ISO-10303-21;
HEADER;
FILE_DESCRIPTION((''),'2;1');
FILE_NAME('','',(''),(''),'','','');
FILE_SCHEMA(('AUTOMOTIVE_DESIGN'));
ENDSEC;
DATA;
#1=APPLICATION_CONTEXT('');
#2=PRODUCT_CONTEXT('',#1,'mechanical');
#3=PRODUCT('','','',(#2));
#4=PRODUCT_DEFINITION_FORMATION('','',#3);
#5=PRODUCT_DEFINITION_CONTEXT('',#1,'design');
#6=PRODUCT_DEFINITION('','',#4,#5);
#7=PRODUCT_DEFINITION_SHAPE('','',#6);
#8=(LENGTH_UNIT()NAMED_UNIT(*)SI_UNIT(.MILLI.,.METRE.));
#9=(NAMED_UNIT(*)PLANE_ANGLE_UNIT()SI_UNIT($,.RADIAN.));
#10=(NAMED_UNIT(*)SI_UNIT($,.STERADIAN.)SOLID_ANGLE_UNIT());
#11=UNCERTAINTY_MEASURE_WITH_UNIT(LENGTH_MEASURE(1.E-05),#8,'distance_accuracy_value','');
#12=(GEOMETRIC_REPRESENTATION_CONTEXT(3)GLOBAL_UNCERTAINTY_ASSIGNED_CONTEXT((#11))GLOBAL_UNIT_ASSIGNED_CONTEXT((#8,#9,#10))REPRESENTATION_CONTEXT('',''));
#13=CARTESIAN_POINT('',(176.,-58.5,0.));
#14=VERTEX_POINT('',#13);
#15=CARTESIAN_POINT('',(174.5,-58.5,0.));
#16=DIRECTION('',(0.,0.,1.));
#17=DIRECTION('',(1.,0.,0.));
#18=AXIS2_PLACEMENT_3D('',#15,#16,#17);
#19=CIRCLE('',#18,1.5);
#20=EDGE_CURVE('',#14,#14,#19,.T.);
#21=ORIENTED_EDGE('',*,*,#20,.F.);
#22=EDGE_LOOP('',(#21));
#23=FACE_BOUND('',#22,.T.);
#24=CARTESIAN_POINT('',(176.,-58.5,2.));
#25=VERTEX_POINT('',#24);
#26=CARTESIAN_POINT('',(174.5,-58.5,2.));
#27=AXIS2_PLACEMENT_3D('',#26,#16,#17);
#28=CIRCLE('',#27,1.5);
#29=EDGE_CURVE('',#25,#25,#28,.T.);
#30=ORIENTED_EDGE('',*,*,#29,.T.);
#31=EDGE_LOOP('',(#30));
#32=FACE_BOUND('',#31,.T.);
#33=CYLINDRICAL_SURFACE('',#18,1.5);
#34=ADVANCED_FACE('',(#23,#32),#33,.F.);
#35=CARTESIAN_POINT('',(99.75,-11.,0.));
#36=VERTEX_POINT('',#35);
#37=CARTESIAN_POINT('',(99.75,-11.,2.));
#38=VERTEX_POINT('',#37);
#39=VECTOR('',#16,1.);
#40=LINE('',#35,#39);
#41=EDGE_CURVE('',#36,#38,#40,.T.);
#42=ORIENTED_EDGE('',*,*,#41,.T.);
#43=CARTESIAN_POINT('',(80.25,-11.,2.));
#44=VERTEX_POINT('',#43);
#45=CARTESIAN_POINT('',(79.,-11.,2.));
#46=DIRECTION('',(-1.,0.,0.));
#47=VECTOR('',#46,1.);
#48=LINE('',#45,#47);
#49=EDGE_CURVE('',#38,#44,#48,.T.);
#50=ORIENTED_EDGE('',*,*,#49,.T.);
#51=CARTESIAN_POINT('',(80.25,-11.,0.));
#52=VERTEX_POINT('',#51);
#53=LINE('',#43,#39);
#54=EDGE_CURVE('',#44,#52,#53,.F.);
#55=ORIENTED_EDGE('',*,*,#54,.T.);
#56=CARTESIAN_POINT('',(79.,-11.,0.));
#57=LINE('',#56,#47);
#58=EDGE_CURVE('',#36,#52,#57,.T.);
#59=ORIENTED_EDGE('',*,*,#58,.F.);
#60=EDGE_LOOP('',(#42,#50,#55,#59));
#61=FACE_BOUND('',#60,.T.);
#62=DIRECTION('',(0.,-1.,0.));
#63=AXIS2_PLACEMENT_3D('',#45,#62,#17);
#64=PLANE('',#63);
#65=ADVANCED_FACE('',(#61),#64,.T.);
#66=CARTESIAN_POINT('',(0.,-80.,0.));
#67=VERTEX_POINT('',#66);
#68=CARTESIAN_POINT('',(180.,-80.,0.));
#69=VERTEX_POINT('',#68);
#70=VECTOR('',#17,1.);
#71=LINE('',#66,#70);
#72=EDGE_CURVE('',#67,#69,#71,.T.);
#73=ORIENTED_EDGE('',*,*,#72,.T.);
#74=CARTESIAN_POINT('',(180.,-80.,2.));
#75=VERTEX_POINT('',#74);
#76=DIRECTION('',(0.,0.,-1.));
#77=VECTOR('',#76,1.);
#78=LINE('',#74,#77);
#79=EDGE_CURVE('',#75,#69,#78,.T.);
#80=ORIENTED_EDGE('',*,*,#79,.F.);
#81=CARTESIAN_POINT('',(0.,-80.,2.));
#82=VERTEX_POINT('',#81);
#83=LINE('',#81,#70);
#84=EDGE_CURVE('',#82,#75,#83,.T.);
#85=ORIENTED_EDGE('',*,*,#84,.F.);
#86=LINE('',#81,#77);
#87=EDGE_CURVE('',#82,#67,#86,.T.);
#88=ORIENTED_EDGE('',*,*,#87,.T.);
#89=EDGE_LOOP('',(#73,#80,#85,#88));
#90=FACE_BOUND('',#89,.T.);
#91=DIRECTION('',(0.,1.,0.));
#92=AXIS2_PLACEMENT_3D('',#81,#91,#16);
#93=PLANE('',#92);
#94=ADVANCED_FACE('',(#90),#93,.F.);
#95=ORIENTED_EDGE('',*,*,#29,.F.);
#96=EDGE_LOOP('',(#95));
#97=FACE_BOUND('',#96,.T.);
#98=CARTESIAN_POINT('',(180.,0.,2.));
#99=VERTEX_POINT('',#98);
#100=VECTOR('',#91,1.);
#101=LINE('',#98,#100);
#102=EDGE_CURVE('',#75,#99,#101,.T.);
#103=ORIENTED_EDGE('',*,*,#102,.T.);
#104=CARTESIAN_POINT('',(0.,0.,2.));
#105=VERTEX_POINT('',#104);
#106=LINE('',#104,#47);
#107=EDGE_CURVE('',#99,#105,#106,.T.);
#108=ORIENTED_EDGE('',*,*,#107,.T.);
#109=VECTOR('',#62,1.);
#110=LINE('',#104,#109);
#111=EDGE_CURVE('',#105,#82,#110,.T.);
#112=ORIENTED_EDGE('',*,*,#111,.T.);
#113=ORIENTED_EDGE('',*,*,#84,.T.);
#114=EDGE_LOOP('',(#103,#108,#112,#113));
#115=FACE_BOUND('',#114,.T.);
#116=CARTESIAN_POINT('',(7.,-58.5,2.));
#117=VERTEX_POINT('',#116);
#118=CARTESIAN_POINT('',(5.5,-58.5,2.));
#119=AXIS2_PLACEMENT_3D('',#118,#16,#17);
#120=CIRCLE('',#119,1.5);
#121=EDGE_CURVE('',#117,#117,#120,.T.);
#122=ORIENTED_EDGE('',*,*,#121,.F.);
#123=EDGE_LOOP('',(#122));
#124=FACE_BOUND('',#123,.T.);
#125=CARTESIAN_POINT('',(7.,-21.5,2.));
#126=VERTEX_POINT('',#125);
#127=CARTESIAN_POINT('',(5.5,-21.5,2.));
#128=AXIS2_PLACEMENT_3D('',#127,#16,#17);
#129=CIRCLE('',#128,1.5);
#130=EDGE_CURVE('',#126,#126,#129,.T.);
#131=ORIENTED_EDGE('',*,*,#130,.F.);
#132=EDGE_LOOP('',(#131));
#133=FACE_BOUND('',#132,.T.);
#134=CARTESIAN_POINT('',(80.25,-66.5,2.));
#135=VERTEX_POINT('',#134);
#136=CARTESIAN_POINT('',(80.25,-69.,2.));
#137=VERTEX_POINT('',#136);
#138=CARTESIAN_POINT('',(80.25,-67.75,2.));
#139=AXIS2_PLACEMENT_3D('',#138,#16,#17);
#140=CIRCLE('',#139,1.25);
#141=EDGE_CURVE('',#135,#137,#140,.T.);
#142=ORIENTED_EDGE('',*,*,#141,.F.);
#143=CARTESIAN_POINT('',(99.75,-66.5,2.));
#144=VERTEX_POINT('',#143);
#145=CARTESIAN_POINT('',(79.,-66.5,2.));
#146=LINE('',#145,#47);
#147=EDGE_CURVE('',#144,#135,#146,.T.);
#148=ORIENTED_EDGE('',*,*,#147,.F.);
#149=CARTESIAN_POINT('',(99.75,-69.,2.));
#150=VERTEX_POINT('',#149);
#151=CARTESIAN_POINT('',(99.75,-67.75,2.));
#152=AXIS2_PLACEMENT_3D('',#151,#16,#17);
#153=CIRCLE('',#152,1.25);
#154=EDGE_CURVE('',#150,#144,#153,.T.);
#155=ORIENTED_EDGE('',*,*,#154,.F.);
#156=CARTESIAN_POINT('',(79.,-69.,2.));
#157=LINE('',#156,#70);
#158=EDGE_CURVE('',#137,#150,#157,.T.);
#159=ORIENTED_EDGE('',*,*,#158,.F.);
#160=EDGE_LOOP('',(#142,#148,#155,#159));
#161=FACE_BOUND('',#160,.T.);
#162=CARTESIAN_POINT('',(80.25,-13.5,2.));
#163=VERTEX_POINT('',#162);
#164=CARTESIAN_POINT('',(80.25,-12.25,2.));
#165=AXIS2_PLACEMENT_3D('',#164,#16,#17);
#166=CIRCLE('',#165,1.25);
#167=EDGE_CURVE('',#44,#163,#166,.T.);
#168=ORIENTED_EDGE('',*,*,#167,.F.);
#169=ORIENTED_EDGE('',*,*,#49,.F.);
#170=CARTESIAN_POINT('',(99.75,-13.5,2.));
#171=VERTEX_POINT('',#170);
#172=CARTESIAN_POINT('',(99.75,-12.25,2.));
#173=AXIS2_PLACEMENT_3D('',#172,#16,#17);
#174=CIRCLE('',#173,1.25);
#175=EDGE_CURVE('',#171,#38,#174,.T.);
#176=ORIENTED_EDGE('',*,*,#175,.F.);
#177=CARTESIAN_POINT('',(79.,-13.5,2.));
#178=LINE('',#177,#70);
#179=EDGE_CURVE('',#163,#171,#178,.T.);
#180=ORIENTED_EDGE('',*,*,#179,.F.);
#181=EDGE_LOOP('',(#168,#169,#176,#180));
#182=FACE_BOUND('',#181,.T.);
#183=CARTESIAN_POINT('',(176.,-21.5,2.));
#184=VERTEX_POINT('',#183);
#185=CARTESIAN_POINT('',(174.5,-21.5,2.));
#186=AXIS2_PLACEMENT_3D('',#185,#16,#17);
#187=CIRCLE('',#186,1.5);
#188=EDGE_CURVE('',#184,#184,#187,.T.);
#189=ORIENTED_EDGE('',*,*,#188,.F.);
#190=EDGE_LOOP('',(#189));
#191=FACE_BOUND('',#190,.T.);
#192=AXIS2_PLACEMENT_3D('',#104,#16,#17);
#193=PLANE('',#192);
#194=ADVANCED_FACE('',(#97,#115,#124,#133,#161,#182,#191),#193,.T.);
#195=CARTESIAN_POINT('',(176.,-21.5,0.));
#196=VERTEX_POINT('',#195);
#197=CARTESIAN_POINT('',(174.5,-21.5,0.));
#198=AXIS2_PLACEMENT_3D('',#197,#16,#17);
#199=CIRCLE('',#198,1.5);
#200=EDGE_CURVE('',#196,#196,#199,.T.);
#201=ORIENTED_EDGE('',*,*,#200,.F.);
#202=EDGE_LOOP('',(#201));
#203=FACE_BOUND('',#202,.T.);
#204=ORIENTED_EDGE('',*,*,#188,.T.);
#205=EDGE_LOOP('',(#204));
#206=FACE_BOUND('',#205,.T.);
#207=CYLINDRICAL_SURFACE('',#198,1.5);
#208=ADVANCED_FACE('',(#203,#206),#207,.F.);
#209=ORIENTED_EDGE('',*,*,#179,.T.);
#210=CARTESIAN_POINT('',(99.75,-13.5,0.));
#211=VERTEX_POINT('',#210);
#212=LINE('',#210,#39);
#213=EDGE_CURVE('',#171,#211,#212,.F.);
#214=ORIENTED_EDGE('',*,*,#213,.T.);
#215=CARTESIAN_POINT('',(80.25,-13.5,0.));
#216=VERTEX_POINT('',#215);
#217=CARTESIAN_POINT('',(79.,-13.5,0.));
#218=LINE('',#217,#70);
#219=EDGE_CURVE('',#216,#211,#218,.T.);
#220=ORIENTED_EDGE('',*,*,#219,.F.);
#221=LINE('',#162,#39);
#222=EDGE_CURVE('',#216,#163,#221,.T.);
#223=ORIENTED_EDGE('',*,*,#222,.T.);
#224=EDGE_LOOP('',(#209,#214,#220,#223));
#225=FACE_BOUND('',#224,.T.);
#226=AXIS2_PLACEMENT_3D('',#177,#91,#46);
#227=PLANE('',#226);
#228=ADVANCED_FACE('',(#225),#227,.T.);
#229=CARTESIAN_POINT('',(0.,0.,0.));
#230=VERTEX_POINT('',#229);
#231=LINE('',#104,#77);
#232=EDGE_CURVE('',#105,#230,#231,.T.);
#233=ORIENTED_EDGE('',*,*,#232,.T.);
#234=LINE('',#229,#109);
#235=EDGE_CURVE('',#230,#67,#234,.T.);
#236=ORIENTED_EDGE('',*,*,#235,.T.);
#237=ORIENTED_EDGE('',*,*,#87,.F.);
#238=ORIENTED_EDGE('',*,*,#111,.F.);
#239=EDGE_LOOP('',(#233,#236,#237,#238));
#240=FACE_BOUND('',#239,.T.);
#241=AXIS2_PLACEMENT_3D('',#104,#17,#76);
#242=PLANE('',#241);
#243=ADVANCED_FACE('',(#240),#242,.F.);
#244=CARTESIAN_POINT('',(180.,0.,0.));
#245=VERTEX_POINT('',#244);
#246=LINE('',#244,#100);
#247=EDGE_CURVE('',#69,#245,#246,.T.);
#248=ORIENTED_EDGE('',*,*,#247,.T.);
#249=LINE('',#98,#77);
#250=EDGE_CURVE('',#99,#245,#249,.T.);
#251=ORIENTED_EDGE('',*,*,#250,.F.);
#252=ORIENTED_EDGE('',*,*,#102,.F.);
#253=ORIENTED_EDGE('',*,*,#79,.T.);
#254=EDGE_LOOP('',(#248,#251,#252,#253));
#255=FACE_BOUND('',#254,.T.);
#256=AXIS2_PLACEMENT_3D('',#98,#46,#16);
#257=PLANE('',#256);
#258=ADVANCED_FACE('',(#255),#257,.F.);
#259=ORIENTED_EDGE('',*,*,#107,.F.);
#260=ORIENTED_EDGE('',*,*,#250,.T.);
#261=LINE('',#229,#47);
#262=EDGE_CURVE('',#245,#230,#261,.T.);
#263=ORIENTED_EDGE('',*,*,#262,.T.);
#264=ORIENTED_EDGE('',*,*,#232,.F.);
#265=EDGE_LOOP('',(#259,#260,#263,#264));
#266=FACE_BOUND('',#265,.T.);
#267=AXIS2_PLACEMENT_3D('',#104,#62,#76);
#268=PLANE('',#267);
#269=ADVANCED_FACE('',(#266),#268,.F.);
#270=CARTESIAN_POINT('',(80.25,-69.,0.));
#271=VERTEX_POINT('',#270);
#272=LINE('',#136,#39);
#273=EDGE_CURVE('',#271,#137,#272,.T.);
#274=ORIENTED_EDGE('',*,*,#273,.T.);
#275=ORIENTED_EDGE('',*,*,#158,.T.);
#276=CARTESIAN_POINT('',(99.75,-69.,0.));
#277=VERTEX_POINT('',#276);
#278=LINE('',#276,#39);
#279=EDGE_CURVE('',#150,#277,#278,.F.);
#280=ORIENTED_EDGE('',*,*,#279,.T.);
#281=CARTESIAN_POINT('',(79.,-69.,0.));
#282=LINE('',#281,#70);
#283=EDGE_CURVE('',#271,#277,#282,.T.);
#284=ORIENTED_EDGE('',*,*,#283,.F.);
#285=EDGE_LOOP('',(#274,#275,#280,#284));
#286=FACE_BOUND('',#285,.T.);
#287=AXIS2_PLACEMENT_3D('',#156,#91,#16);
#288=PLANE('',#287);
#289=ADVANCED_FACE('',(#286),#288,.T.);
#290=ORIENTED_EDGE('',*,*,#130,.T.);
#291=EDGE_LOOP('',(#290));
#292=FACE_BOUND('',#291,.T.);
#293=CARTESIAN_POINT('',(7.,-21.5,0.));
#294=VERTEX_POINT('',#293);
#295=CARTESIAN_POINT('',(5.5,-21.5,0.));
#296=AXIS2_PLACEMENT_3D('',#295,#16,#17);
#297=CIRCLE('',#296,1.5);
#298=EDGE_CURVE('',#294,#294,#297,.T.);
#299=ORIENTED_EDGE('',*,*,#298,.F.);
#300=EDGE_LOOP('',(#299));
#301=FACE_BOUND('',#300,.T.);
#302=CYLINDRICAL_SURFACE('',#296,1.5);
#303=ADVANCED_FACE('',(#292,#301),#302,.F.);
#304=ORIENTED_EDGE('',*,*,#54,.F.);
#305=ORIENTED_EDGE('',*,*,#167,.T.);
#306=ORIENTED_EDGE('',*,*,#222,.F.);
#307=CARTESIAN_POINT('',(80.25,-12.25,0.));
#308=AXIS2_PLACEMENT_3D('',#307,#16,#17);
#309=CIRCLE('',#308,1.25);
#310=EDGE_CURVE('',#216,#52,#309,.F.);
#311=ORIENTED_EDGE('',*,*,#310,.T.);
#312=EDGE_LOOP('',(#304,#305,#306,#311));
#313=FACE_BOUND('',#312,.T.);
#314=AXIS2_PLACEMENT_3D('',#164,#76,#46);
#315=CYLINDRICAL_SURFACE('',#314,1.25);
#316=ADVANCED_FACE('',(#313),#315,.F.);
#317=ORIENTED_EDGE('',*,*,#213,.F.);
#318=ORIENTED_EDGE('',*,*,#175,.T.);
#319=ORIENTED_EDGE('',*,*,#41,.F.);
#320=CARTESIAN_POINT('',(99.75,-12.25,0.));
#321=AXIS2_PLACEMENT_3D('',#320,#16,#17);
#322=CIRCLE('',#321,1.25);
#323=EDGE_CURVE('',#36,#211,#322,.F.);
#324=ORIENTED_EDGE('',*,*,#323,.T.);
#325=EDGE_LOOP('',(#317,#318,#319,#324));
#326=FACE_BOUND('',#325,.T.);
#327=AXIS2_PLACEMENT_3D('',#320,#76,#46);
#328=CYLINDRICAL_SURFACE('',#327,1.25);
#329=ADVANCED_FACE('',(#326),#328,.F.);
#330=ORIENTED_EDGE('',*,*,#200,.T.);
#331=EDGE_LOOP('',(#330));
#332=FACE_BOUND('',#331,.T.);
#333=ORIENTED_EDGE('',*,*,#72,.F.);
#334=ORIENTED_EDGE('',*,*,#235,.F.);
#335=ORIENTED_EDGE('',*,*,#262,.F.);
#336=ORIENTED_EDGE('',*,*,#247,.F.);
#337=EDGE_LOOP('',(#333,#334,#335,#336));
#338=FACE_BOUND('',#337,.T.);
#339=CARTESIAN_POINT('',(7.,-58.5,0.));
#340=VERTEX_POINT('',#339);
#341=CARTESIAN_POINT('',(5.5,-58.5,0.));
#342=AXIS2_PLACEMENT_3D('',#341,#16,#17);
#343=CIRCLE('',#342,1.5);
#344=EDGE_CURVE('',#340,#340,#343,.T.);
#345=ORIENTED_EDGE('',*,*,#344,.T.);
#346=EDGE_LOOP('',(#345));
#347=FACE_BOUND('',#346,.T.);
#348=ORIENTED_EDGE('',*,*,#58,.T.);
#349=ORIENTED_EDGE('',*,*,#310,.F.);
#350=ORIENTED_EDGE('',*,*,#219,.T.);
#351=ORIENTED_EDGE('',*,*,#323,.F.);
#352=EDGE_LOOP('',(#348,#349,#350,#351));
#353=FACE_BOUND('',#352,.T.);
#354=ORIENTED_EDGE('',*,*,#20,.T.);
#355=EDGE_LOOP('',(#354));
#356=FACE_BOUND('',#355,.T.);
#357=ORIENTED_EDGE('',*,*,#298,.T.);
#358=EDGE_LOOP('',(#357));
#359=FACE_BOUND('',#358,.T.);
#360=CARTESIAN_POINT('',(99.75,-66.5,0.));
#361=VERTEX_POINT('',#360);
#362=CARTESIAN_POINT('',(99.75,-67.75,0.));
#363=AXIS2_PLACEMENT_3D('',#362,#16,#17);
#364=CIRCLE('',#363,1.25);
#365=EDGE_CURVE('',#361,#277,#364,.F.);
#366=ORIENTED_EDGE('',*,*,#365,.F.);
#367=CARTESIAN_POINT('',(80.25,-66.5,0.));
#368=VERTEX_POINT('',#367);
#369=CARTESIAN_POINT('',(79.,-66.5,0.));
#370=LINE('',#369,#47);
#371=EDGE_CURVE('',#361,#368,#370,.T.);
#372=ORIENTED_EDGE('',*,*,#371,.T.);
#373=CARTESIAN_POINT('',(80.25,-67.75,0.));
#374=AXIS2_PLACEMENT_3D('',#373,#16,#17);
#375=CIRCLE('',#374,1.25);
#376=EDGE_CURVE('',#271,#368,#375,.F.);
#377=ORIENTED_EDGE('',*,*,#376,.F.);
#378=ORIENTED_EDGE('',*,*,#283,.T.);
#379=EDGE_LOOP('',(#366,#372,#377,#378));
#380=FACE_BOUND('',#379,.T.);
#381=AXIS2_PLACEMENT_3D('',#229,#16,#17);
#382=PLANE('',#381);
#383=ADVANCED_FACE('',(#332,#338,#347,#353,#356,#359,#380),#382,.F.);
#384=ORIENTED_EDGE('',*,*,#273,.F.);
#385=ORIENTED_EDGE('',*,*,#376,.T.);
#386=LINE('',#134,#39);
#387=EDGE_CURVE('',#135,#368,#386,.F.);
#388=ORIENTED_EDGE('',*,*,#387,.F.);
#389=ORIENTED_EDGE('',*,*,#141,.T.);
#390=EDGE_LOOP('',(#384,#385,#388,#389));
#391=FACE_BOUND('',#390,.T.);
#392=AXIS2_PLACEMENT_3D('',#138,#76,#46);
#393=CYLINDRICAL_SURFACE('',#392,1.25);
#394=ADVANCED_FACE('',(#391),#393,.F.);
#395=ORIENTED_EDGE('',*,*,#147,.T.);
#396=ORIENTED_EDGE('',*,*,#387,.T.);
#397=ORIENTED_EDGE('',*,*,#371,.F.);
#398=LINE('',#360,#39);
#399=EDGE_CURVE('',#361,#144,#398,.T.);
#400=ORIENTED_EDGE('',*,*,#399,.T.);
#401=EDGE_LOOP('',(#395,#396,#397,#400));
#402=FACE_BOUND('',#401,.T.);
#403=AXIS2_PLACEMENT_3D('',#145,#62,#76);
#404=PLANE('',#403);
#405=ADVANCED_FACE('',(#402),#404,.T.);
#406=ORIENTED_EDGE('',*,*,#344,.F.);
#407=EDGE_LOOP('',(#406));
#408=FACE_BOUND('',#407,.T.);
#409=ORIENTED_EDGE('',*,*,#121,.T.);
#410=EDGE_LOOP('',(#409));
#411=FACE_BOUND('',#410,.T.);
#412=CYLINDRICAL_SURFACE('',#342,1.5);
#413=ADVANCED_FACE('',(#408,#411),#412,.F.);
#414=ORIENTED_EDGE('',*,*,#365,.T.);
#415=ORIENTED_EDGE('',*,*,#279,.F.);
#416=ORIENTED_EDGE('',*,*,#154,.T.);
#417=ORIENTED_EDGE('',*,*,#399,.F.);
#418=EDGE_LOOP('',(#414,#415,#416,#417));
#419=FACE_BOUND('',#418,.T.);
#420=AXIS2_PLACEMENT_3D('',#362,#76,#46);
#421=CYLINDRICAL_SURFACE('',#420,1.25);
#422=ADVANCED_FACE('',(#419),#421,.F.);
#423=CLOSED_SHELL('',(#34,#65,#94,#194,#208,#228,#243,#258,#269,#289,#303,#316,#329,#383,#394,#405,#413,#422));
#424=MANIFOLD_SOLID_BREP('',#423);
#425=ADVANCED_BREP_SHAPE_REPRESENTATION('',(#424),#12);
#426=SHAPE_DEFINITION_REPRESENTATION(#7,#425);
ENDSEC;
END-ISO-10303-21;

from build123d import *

# Parameters (mm, degrees)
ESBO_O1_W                = 180
ESBO_O1_H                = 80
RESSALTO_EXTRUS_O1_DEPTH = 2
ESBO_O2_R                = 1.5
CORTE_EXTRUS_O1_DEPTH    = 2
ESBO_O3_W                = 22
ESBO_O3_H                = 2.5
CORTE_EXTRUS_O2_DEPTH    = 2
FILETE4_R                = 1.25
FILETE5_R                = 1.25
FILETE6_R                = 1.25
FILETE7_R                = 1.25


with BuildPart() as part:
    # Esboço1 → Ressalto-extrusão1 (new body)
    with BuildSketch(Plane.XY):
        with Locations((90, -40)):
            Rectangle(ESBO_O1_W, ESBO_O1_H)
    extrude(amount=RESSALTO_EXTRUS_O1_DEPTH)

    # Esboço2 → Corte-extrusão1 (cut)
    with BuildSketch(Plane.XY.offset(2)):
        with Locations((5.5, -58.5)):
            Circle(ESBO_O2_R)
        with Locations((5.5, -21.5)):
            Circle(ESBO_O2_R)
        with Locations((174.5, -21.5)):
            Circle(ESBO_O2_R)
        with Locations((174.5, -58.5)):
            Circle(ESBO_O2_R)
    extrude(amount=-CORTE_EXTRUS_O1_DEPTH, mode=Mode.SUBTRACT)

    # Esboço3 → Corte-extrusão2 (cut)
    with BuildSketch(Plane.XY):
        with Locations((90, -12.25)):
            Rectangle(ESBO_O3_W, ESBO_O3_H)
        with Locations((90, -67.75)):
            Rectangle(ESBO_O3_W, ESBO_O3_H)
    extrude(amount=CORTE_EXTRUS_O2_DEPTH, mode=Mode.SUBTRACT)

    # Filete4
    filete4_edges = [part.edges().sort_by_distance(p)[0] for p in [
        (79, -11, 1),
        (79, -13.5, 1),
    ]]
    fillet(filete4_edges, radius=FILETE4_R - 0.0001)  # a hair under: the kernel refuses the full size

    # Filete5
    filete5_edges = [part.edges().sort_by_distance(p)[0] for p in [
        (101, -13.5, 1),
        (101, -11, 1),
    ]]
    fillet(filete5_edges, radius=FILETE5_R - 0.0001)  # a hair under: the kernel refuses the full size

    # Filete6
    filete6_edges = [part.edges().sort_by_distance(p)[0] for p in [
        (79, -66.5, 1),
        (79, -69, 1),
    ]]
    fillet(filete6_edges, radius=FILETE6_R - 0.0001)  # a hair under: the kernel refuses the full size

    # Filete7
    filete7_edges = [part.edges().sort_by_distance(p)[0] for p in [
        (101, -69, 1),
        (101, -66.5, 1),
    ]]
    fillet(filete7_edges, radius=FILETE7_R - 0.0001)  # a hair under: the kernel refuses the full size


solid = part.part
